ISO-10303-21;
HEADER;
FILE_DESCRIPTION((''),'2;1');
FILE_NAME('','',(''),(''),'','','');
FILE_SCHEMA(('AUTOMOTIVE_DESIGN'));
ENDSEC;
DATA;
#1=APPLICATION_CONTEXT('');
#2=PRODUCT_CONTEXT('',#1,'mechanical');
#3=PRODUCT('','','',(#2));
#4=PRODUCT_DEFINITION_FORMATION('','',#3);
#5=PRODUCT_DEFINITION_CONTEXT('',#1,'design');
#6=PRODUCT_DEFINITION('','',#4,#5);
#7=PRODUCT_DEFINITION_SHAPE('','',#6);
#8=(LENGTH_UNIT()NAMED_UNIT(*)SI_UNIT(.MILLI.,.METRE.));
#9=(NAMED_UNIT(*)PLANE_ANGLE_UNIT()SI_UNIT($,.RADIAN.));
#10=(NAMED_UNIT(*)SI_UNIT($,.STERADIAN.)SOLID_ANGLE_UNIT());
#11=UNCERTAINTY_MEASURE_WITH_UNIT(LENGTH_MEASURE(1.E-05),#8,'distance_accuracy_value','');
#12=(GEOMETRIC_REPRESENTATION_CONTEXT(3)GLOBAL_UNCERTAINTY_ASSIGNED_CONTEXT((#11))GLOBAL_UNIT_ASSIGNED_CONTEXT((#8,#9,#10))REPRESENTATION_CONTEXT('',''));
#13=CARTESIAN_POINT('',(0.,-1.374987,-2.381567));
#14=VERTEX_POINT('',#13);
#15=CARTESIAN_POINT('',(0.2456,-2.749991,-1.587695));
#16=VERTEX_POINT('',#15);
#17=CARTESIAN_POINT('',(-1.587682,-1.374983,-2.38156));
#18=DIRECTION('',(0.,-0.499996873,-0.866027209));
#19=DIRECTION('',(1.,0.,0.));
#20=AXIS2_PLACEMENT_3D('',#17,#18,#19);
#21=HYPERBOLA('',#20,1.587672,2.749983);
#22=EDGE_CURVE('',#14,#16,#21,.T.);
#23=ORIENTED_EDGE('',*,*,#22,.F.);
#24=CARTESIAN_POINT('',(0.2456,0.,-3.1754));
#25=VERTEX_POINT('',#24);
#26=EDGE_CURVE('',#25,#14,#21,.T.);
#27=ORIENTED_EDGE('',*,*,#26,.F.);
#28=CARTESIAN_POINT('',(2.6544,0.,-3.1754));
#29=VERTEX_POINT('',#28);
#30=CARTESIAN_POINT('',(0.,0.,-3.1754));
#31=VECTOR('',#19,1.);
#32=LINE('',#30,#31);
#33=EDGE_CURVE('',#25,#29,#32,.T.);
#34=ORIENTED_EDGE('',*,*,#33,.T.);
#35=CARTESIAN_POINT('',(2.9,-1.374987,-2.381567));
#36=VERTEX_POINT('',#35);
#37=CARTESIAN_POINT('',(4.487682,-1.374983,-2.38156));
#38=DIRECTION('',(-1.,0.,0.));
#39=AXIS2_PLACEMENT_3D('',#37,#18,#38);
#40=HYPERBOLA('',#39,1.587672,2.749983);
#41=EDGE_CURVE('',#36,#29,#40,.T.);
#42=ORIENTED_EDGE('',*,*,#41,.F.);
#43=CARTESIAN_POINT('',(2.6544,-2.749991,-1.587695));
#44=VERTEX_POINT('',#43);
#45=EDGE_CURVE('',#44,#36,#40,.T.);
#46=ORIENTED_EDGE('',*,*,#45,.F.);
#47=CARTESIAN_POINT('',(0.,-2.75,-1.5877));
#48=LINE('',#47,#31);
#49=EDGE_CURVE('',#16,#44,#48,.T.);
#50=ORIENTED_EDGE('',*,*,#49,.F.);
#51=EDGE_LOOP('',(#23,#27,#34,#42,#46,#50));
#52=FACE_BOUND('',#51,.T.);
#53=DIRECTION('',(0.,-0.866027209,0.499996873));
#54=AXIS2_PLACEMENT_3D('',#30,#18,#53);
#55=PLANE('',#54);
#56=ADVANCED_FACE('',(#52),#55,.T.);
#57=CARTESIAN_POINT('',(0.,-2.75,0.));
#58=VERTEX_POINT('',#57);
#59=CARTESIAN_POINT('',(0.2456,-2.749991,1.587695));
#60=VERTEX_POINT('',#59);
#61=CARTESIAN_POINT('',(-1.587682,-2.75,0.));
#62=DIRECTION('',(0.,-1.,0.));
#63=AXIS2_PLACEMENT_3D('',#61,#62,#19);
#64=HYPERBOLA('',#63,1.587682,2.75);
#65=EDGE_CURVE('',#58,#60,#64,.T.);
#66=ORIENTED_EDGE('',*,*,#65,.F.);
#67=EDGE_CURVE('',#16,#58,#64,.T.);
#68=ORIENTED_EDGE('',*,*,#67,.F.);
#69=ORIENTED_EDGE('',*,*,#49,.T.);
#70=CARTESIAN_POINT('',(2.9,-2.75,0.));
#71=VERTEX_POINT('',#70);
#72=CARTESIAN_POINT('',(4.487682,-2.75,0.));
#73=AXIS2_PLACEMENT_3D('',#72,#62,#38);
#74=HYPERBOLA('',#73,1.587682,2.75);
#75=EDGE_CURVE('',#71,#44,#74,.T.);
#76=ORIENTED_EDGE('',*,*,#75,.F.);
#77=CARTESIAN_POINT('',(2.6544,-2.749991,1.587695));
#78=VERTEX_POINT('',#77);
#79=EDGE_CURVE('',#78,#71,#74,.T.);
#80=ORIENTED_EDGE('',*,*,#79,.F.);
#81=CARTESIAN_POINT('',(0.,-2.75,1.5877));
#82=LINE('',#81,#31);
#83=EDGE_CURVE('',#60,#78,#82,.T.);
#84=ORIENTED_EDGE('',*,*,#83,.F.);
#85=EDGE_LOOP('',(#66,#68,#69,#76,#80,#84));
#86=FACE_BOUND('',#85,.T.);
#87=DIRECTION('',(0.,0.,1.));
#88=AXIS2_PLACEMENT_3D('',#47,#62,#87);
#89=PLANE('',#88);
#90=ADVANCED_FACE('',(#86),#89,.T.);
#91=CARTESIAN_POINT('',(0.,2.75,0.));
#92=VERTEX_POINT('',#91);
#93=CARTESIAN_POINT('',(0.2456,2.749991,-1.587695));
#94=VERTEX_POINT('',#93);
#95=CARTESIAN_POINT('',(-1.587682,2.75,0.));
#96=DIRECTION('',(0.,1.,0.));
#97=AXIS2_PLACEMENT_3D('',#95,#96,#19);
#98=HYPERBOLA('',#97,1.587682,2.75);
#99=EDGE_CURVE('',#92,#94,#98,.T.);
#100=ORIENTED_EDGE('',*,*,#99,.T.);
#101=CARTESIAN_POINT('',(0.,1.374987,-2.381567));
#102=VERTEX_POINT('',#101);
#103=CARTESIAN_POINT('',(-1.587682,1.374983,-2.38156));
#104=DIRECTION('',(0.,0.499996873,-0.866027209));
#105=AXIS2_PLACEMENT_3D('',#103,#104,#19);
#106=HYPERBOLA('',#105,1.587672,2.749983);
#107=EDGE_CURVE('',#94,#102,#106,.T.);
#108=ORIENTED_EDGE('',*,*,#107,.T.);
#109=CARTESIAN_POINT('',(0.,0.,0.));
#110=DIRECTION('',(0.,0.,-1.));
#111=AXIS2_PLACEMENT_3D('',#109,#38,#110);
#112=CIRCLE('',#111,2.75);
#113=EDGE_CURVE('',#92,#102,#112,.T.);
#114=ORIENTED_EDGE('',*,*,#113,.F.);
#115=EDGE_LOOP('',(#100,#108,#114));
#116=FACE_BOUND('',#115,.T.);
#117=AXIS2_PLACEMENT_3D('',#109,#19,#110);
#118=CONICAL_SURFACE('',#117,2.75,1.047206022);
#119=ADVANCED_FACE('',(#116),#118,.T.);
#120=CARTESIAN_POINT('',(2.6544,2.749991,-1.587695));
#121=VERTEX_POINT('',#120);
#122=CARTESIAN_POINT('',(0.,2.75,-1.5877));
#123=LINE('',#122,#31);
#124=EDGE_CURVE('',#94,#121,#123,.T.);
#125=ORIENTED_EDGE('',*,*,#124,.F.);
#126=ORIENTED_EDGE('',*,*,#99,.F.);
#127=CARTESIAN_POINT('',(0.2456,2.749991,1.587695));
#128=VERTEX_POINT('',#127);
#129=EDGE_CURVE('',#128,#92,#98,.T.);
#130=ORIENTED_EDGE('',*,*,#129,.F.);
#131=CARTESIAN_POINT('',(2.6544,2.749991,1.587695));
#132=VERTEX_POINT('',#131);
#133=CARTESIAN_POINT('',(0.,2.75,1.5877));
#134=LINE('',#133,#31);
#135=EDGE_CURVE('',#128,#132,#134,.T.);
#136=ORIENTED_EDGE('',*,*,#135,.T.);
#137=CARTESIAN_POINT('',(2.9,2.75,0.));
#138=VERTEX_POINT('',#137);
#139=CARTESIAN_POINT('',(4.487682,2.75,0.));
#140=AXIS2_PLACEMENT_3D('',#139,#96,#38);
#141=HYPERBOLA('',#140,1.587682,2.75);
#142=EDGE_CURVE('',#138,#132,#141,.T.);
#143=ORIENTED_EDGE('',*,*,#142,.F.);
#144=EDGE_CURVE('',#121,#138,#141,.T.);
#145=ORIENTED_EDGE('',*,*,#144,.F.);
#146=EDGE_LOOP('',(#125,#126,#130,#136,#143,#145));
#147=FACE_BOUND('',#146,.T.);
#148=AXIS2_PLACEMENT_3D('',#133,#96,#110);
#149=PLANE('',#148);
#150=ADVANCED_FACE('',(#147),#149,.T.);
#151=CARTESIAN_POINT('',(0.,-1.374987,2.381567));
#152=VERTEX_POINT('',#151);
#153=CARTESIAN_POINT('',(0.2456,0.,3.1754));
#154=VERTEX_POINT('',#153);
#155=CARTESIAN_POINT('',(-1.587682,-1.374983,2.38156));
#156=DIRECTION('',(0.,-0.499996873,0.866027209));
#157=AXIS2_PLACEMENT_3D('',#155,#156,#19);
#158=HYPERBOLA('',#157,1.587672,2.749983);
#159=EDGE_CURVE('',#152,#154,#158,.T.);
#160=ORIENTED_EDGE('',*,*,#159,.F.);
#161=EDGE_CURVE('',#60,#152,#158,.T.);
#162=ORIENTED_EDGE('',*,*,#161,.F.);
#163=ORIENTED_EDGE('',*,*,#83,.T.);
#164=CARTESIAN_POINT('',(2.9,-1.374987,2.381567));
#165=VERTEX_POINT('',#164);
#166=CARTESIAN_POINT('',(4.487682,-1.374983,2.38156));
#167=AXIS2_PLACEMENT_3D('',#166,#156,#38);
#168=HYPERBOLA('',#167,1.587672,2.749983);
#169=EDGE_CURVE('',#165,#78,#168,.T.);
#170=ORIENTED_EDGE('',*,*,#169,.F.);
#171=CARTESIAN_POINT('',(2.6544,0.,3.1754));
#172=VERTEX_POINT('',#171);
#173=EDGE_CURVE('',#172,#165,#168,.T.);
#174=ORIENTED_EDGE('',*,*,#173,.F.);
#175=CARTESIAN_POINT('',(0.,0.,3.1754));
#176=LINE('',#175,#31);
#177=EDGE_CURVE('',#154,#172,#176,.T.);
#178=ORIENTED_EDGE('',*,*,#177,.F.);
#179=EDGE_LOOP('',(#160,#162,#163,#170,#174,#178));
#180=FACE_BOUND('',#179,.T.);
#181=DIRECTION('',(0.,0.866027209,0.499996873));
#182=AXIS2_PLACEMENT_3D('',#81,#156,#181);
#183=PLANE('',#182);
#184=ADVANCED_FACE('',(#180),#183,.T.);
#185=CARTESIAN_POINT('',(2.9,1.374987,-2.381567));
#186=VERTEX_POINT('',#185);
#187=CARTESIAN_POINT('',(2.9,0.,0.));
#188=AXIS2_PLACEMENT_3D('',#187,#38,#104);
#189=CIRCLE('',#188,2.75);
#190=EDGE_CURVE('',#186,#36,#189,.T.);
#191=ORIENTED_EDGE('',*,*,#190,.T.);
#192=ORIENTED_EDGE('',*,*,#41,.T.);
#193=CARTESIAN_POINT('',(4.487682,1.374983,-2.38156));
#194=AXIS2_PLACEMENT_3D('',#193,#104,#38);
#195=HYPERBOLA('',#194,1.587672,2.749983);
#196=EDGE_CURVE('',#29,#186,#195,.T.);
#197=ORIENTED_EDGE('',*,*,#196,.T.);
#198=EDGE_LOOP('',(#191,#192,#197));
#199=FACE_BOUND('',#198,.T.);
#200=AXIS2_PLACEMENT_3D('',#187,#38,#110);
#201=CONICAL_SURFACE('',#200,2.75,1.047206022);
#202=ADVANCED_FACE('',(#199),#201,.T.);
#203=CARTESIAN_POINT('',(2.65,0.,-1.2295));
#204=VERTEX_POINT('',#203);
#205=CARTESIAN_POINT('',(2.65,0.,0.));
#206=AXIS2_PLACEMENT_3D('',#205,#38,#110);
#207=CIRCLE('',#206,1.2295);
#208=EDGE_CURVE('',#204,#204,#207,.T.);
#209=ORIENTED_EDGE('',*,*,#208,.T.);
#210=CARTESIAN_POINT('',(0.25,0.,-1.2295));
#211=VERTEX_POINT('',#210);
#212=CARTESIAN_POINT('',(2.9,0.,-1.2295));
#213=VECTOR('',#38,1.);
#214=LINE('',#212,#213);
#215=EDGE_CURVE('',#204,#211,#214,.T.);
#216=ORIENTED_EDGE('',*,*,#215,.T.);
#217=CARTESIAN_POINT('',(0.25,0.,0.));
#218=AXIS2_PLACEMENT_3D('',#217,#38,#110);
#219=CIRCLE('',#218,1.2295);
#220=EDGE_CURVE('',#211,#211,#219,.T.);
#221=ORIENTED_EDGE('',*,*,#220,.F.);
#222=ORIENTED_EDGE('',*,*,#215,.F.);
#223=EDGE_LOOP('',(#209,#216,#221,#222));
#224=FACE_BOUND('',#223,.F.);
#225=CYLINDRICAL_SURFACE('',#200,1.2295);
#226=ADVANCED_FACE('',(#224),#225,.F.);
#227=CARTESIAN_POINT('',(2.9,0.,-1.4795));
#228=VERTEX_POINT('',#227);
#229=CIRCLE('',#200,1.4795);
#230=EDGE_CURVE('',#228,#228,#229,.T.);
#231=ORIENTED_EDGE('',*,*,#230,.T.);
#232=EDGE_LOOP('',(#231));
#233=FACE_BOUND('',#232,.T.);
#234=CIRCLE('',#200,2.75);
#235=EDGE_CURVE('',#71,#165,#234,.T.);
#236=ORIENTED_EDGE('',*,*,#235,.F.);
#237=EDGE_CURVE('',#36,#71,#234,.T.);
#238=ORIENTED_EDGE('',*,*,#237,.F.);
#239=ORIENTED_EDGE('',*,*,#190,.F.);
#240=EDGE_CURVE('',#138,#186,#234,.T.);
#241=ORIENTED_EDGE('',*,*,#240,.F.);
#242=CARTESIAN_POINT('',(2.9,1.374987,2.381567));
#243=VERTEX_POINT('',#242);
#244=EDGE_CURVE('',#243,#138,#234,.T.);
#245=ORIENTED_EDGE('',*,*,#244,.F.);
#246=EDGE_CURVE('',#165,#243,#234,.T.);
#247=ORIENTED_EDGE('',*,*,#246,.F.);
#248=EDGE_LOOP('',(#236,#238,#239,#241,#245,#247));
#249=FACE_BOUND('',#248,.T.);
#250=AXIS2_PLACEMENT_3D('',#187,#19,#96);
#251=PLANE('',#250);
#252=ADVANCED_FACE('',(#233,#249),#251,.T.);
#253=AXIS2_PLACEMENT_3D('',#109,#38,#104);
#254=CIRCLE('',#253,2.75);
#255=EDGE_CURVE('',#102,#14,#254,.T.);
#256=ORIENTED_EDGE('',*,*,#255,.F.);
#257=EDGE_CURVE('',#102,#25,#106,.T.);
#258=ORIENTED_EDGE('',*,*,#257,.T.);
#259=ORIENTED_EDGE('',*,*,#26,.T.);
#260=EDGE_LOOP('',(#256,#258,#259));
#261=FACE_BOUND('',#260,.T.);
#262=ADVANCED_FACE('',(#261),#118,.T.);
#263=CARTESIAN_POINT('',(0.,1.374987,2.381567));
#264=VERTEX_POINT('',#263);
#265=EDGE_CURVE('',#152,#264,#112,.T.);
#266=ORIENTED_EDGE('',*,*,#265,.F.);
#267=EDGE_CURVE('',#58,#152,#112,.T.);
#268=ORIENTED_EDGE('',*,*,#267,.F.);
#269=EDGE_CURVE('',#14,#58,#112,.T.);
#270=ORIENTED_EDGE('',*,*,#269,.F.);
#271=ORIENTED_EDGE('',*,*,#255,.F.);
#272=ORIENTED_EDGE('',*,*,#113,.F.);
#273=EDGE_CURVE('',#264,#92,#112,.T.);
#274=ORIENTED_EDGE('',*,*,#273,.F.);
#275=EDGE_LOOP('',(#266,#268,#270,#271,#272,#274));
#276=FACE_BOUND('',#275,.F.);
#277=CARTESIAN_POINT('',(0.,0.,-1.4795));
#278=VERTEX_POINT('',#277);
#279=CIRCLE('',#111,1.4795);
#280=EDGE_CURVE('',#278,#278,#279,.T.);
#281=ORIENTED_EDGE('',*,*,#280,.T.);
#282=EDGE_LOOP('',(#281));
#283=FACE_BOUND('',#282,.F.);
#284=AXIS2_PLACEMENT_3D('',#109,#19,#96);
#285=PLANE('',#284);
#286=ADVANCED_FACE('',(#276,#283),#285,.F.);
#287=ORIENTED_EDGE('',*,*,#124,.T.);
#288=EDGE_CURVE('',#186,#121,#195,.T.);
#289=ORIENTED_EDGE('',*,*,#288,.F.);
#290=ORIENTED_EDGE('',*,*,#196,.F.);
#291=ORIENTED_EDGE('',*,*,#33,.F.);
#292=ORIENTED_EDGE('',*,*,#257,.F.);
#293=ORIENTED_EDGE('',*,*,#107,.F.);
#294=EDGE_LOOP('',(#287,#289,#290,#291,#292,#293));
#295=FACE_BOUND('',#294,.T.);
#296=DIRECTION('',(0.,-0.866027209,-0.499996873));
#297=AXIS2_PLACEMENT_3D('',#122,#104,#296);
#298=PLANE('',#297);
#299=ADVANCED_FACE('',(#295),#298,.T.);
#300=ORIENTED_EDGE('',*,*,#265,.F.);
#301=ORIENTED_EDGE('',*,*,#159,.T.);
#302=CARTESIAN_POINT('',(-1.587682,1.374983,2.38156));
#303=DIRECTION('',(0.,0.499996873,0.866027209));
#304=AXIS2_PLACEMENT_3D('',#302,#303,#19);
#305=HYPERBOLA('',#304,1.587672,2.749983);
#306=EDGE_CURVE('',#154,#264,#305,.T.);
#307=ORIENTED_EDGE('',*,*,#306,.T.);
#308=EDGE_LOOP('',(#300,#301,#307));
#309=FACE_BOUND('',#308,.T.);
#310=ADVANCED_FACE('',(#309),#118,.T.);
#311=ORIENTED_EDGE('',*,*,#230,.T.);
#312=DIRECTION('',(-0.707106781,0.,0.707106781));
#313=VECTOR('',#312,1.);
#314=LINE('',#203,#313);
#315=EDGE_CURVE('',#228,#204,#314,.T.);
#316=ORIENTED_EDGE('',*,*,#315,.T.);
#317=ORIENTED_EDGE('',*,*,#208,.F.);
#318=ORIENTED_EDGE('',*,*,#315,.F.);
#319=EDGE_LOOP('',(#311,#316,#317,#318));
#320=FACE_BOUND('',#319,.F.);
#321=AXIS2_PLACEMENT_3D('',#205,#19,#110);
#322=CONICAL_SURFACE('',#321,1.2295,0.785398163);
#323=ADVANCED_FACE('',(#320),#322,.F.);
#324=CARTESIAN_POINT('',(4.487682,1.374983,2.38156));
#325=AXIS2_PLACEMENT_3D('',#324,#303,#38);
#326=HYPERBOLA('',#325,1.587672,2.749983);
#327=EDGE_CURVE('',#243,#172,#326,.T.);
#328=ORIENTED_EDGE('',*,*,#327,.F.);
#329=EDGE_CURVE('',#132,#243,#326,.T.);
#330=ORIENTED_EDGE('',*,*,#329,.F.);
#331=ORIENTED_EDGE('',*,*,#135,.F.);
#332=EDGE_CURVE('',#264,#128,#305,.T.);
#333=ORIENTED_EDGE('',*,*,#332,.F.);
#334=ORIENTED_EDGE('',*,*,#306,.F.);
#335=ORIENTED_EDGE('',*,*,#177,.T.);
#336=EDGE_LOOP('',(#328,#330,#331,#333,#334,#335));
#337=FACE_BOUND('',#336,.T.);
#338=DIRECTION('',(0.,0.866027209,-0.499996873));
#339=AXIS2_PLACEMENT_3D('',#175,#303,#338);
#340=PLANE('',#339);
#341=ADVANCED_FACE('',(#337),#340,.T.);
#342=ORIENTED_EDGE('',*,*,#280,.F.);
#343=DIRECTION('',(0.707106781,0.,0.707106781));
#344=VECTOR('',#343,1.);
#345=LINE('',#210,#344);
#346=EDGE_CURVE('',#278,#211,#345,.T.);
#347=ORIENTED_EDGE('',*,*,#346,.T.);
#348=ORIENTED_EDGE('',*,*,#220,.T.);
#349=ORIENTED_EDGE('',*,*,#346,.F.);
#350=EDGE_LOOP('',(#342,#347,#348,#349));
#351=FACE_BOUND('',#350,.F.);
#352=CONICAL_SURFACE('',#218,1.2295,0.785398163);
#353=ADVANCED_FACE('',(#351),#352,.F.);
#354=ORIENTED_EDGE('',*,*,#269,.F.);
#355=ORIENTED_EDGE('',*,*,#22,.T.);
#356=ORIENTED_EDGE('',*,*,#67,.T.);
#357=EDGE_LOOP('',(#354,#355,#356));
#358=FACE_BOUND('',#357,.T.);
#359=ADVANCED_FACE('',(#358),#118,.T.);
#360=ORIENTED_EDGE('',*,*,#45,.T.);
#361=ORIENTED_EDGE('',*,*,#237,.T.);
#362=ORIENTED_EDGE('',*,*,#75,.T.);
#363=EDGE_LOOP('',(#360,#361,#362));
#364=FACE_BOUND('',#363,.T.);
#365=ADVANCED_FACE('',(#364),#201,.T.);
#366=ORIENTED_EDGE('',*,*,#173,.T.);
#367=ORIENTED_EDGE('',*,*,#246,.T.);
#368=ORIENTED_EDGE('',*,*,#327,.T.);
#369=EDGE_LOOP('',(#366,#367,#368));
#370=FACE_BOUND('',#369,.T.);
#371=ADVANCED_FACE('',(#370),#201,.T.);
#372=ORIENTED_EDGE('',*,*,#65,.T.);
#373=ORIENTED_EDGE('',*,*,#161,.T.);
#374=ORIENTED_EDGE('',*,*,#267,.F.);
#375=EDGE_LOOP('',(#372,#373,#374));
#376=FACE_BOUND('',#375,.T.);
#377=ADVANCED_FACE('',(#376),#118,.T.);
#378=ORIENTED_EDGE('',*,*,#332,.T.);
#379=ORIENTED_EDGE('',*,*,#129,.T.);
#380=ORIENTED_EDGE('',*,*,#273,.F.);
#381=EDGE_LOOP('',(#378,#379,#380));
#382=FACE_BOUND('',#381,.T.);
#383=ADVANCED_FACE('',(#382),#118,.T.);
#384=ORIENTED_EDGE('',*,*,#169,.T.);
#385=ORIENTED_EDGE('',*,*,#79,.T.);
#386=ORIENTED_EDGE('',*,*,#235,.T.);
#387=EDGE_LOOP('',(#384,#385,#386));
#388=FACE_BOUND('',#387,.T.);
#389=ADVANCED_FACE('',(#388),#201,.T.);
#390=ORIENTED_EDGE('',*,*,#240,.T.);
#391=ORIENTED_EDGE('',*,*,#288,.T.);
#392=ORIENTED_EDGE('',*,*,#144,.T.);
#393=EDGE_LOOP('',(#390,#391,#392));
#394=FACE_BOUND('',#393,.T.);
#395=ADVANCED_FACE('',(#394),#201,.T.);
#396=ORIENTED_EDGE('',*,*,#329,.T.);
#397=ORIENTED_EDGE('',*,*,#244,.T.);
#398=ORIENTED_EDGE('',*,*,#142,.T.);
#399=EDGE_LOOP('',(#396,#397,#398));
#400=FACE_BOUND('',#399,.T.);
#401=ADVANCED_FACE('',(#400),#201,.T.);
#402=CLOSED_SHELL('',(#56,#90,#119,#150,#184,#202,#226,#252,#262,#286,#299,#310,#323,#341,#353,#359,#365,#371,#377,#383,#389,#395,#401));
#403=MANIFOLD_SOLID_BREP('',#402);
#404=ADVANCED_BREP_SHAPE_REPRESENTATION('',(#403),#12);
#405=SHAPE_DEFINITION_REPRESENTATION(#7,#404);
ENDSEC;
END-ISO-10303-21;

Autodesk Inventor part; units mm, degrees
sketch "Boceto1" plane through (0, 0, 0) normal (1, 0, 0) x (0, 1, 0)
  line L0 (2.75, 1.5877) -> (2.75, -1.5877)
  line L1 (2.75, -1.5877) -> (0, -3.1754)
  line L2 (0, -3.1754) -> (-2.75, -1.5877)
  line L3 (-2.75, -1.5877) -> (-2.75, 1.5877)
  line L4 (-2.75, 1.5877) -> (0, 3.1754)
  line L5 (0, 3.1754) -> (2.75, 1.5877)
  circle A0 centre (0, 0) radius 2.75 construction
  dimension "d0" = 5.5
extrude "Extrusión1" add sketch "Boceto1" along normal blind 2.9
sketch "Boceto2" plane through (2.9, 0, 0) normal (1, 0, 0) x (0, 1, 0)
  line L0 (-2.75, 1.5877) -> (0, 3.1754) projected
  line L1 (0, -3.1754) -> (-2.75, -1.5877) projected
  line L2 (-2.75, 1.5877) -> (2.75, -1.5877) construction
  line L3 (-2.75, -1.5877) -> (2.75, 1.5877) construction
  point P0 (0, 0)
hole "Agujero1" at (2.9, 0, 0) direction (-1, 0, 0) diameter 2.459 end through all thread size "M3x0.5" class "6H" standard "ISO Metric profile"
chamfer "Chaflán1" distance 0.25 angle 45 2 edges at (2.9, 0, 1.2295) (0, 0, 1.2295)
sketch "Boceto3" plane through (0, 0, 0) normal (0, 1, 0) x (-1, 0, 0)
  line L0 (-7.0172, 0) -> (2.1698, 0) projected
  line L1 (-5.7048, 0) -> (0.8574, 0)
  line L2 (-2.9, 0) -> (-2.9, -3.1754)
  line L3 (-2.9, -3.1754) -> (0, -3.1754)
  line L4 (0, -3.1754) -> (0, 0)
  line L5 (-2.9, -1.5877) -> (-2.9, -3.1754) projected
  line L6 (0, -1.5877) -> (0, -3.1754) projected
  line L7 (0, -3.1754) -> (-2.9, -3.1754) projected
  line L8 (-2.9, -2.75) -> (-2.6544, -3.1754)
  line L9 (-2.9, -3.1754) -> (-2.9, -2.75)
  line L10 (-2.9, -3.1754) -> (-2.6544, -3.1754)
  line L11 (0, -2.75) -> (-0.2456, -3.1754)
  line L12 (-0.2456, -3.1754) -> (0, -3.1754)
  line L13 (0, -3.1754) -> (0, -2.75)
  dimension "d32" = 2.75
  dimension "d33" = 30
revolve "Revolución1" cut sketch "Boceto3" angle 360 about axis through (0, 0, 0) along (-1, 0, 0) contours L8 L3 L2 | L4 L3 L11
ref_plane "MSC_PT1" through (2.9, 0, 0) normal (1, 0, 0) x (0, 1, 0)
ref_plane "MSC_PT2" through (0, 0, 0) normal (-1, 0, 0) x (0, -1, 0)
ref_plane "MSC_PF1" through (0, 0, 0) normal (1, 0, 0) x (0, 1, 0)
equation "\"d0\" = Smax"
equation "\"d1\" = Mmax"
equation "\"d10\" = 0.5 * PTC"
equation "\"d32\" = 0.5 * Smax"
equation "\"NND\" = 3"
equation "\"Smax\" = 5.5"
equation "\"Mmax\" = 2.9"
equation "\"PTC\" = 0.5"
equation "\"THREADDIA\" = NND"
equation "\"TEMPLATE\" = 1.2345"
properties part number "ANSI B18.2.4.2M - M3x0,5" material "Acero, suave"
